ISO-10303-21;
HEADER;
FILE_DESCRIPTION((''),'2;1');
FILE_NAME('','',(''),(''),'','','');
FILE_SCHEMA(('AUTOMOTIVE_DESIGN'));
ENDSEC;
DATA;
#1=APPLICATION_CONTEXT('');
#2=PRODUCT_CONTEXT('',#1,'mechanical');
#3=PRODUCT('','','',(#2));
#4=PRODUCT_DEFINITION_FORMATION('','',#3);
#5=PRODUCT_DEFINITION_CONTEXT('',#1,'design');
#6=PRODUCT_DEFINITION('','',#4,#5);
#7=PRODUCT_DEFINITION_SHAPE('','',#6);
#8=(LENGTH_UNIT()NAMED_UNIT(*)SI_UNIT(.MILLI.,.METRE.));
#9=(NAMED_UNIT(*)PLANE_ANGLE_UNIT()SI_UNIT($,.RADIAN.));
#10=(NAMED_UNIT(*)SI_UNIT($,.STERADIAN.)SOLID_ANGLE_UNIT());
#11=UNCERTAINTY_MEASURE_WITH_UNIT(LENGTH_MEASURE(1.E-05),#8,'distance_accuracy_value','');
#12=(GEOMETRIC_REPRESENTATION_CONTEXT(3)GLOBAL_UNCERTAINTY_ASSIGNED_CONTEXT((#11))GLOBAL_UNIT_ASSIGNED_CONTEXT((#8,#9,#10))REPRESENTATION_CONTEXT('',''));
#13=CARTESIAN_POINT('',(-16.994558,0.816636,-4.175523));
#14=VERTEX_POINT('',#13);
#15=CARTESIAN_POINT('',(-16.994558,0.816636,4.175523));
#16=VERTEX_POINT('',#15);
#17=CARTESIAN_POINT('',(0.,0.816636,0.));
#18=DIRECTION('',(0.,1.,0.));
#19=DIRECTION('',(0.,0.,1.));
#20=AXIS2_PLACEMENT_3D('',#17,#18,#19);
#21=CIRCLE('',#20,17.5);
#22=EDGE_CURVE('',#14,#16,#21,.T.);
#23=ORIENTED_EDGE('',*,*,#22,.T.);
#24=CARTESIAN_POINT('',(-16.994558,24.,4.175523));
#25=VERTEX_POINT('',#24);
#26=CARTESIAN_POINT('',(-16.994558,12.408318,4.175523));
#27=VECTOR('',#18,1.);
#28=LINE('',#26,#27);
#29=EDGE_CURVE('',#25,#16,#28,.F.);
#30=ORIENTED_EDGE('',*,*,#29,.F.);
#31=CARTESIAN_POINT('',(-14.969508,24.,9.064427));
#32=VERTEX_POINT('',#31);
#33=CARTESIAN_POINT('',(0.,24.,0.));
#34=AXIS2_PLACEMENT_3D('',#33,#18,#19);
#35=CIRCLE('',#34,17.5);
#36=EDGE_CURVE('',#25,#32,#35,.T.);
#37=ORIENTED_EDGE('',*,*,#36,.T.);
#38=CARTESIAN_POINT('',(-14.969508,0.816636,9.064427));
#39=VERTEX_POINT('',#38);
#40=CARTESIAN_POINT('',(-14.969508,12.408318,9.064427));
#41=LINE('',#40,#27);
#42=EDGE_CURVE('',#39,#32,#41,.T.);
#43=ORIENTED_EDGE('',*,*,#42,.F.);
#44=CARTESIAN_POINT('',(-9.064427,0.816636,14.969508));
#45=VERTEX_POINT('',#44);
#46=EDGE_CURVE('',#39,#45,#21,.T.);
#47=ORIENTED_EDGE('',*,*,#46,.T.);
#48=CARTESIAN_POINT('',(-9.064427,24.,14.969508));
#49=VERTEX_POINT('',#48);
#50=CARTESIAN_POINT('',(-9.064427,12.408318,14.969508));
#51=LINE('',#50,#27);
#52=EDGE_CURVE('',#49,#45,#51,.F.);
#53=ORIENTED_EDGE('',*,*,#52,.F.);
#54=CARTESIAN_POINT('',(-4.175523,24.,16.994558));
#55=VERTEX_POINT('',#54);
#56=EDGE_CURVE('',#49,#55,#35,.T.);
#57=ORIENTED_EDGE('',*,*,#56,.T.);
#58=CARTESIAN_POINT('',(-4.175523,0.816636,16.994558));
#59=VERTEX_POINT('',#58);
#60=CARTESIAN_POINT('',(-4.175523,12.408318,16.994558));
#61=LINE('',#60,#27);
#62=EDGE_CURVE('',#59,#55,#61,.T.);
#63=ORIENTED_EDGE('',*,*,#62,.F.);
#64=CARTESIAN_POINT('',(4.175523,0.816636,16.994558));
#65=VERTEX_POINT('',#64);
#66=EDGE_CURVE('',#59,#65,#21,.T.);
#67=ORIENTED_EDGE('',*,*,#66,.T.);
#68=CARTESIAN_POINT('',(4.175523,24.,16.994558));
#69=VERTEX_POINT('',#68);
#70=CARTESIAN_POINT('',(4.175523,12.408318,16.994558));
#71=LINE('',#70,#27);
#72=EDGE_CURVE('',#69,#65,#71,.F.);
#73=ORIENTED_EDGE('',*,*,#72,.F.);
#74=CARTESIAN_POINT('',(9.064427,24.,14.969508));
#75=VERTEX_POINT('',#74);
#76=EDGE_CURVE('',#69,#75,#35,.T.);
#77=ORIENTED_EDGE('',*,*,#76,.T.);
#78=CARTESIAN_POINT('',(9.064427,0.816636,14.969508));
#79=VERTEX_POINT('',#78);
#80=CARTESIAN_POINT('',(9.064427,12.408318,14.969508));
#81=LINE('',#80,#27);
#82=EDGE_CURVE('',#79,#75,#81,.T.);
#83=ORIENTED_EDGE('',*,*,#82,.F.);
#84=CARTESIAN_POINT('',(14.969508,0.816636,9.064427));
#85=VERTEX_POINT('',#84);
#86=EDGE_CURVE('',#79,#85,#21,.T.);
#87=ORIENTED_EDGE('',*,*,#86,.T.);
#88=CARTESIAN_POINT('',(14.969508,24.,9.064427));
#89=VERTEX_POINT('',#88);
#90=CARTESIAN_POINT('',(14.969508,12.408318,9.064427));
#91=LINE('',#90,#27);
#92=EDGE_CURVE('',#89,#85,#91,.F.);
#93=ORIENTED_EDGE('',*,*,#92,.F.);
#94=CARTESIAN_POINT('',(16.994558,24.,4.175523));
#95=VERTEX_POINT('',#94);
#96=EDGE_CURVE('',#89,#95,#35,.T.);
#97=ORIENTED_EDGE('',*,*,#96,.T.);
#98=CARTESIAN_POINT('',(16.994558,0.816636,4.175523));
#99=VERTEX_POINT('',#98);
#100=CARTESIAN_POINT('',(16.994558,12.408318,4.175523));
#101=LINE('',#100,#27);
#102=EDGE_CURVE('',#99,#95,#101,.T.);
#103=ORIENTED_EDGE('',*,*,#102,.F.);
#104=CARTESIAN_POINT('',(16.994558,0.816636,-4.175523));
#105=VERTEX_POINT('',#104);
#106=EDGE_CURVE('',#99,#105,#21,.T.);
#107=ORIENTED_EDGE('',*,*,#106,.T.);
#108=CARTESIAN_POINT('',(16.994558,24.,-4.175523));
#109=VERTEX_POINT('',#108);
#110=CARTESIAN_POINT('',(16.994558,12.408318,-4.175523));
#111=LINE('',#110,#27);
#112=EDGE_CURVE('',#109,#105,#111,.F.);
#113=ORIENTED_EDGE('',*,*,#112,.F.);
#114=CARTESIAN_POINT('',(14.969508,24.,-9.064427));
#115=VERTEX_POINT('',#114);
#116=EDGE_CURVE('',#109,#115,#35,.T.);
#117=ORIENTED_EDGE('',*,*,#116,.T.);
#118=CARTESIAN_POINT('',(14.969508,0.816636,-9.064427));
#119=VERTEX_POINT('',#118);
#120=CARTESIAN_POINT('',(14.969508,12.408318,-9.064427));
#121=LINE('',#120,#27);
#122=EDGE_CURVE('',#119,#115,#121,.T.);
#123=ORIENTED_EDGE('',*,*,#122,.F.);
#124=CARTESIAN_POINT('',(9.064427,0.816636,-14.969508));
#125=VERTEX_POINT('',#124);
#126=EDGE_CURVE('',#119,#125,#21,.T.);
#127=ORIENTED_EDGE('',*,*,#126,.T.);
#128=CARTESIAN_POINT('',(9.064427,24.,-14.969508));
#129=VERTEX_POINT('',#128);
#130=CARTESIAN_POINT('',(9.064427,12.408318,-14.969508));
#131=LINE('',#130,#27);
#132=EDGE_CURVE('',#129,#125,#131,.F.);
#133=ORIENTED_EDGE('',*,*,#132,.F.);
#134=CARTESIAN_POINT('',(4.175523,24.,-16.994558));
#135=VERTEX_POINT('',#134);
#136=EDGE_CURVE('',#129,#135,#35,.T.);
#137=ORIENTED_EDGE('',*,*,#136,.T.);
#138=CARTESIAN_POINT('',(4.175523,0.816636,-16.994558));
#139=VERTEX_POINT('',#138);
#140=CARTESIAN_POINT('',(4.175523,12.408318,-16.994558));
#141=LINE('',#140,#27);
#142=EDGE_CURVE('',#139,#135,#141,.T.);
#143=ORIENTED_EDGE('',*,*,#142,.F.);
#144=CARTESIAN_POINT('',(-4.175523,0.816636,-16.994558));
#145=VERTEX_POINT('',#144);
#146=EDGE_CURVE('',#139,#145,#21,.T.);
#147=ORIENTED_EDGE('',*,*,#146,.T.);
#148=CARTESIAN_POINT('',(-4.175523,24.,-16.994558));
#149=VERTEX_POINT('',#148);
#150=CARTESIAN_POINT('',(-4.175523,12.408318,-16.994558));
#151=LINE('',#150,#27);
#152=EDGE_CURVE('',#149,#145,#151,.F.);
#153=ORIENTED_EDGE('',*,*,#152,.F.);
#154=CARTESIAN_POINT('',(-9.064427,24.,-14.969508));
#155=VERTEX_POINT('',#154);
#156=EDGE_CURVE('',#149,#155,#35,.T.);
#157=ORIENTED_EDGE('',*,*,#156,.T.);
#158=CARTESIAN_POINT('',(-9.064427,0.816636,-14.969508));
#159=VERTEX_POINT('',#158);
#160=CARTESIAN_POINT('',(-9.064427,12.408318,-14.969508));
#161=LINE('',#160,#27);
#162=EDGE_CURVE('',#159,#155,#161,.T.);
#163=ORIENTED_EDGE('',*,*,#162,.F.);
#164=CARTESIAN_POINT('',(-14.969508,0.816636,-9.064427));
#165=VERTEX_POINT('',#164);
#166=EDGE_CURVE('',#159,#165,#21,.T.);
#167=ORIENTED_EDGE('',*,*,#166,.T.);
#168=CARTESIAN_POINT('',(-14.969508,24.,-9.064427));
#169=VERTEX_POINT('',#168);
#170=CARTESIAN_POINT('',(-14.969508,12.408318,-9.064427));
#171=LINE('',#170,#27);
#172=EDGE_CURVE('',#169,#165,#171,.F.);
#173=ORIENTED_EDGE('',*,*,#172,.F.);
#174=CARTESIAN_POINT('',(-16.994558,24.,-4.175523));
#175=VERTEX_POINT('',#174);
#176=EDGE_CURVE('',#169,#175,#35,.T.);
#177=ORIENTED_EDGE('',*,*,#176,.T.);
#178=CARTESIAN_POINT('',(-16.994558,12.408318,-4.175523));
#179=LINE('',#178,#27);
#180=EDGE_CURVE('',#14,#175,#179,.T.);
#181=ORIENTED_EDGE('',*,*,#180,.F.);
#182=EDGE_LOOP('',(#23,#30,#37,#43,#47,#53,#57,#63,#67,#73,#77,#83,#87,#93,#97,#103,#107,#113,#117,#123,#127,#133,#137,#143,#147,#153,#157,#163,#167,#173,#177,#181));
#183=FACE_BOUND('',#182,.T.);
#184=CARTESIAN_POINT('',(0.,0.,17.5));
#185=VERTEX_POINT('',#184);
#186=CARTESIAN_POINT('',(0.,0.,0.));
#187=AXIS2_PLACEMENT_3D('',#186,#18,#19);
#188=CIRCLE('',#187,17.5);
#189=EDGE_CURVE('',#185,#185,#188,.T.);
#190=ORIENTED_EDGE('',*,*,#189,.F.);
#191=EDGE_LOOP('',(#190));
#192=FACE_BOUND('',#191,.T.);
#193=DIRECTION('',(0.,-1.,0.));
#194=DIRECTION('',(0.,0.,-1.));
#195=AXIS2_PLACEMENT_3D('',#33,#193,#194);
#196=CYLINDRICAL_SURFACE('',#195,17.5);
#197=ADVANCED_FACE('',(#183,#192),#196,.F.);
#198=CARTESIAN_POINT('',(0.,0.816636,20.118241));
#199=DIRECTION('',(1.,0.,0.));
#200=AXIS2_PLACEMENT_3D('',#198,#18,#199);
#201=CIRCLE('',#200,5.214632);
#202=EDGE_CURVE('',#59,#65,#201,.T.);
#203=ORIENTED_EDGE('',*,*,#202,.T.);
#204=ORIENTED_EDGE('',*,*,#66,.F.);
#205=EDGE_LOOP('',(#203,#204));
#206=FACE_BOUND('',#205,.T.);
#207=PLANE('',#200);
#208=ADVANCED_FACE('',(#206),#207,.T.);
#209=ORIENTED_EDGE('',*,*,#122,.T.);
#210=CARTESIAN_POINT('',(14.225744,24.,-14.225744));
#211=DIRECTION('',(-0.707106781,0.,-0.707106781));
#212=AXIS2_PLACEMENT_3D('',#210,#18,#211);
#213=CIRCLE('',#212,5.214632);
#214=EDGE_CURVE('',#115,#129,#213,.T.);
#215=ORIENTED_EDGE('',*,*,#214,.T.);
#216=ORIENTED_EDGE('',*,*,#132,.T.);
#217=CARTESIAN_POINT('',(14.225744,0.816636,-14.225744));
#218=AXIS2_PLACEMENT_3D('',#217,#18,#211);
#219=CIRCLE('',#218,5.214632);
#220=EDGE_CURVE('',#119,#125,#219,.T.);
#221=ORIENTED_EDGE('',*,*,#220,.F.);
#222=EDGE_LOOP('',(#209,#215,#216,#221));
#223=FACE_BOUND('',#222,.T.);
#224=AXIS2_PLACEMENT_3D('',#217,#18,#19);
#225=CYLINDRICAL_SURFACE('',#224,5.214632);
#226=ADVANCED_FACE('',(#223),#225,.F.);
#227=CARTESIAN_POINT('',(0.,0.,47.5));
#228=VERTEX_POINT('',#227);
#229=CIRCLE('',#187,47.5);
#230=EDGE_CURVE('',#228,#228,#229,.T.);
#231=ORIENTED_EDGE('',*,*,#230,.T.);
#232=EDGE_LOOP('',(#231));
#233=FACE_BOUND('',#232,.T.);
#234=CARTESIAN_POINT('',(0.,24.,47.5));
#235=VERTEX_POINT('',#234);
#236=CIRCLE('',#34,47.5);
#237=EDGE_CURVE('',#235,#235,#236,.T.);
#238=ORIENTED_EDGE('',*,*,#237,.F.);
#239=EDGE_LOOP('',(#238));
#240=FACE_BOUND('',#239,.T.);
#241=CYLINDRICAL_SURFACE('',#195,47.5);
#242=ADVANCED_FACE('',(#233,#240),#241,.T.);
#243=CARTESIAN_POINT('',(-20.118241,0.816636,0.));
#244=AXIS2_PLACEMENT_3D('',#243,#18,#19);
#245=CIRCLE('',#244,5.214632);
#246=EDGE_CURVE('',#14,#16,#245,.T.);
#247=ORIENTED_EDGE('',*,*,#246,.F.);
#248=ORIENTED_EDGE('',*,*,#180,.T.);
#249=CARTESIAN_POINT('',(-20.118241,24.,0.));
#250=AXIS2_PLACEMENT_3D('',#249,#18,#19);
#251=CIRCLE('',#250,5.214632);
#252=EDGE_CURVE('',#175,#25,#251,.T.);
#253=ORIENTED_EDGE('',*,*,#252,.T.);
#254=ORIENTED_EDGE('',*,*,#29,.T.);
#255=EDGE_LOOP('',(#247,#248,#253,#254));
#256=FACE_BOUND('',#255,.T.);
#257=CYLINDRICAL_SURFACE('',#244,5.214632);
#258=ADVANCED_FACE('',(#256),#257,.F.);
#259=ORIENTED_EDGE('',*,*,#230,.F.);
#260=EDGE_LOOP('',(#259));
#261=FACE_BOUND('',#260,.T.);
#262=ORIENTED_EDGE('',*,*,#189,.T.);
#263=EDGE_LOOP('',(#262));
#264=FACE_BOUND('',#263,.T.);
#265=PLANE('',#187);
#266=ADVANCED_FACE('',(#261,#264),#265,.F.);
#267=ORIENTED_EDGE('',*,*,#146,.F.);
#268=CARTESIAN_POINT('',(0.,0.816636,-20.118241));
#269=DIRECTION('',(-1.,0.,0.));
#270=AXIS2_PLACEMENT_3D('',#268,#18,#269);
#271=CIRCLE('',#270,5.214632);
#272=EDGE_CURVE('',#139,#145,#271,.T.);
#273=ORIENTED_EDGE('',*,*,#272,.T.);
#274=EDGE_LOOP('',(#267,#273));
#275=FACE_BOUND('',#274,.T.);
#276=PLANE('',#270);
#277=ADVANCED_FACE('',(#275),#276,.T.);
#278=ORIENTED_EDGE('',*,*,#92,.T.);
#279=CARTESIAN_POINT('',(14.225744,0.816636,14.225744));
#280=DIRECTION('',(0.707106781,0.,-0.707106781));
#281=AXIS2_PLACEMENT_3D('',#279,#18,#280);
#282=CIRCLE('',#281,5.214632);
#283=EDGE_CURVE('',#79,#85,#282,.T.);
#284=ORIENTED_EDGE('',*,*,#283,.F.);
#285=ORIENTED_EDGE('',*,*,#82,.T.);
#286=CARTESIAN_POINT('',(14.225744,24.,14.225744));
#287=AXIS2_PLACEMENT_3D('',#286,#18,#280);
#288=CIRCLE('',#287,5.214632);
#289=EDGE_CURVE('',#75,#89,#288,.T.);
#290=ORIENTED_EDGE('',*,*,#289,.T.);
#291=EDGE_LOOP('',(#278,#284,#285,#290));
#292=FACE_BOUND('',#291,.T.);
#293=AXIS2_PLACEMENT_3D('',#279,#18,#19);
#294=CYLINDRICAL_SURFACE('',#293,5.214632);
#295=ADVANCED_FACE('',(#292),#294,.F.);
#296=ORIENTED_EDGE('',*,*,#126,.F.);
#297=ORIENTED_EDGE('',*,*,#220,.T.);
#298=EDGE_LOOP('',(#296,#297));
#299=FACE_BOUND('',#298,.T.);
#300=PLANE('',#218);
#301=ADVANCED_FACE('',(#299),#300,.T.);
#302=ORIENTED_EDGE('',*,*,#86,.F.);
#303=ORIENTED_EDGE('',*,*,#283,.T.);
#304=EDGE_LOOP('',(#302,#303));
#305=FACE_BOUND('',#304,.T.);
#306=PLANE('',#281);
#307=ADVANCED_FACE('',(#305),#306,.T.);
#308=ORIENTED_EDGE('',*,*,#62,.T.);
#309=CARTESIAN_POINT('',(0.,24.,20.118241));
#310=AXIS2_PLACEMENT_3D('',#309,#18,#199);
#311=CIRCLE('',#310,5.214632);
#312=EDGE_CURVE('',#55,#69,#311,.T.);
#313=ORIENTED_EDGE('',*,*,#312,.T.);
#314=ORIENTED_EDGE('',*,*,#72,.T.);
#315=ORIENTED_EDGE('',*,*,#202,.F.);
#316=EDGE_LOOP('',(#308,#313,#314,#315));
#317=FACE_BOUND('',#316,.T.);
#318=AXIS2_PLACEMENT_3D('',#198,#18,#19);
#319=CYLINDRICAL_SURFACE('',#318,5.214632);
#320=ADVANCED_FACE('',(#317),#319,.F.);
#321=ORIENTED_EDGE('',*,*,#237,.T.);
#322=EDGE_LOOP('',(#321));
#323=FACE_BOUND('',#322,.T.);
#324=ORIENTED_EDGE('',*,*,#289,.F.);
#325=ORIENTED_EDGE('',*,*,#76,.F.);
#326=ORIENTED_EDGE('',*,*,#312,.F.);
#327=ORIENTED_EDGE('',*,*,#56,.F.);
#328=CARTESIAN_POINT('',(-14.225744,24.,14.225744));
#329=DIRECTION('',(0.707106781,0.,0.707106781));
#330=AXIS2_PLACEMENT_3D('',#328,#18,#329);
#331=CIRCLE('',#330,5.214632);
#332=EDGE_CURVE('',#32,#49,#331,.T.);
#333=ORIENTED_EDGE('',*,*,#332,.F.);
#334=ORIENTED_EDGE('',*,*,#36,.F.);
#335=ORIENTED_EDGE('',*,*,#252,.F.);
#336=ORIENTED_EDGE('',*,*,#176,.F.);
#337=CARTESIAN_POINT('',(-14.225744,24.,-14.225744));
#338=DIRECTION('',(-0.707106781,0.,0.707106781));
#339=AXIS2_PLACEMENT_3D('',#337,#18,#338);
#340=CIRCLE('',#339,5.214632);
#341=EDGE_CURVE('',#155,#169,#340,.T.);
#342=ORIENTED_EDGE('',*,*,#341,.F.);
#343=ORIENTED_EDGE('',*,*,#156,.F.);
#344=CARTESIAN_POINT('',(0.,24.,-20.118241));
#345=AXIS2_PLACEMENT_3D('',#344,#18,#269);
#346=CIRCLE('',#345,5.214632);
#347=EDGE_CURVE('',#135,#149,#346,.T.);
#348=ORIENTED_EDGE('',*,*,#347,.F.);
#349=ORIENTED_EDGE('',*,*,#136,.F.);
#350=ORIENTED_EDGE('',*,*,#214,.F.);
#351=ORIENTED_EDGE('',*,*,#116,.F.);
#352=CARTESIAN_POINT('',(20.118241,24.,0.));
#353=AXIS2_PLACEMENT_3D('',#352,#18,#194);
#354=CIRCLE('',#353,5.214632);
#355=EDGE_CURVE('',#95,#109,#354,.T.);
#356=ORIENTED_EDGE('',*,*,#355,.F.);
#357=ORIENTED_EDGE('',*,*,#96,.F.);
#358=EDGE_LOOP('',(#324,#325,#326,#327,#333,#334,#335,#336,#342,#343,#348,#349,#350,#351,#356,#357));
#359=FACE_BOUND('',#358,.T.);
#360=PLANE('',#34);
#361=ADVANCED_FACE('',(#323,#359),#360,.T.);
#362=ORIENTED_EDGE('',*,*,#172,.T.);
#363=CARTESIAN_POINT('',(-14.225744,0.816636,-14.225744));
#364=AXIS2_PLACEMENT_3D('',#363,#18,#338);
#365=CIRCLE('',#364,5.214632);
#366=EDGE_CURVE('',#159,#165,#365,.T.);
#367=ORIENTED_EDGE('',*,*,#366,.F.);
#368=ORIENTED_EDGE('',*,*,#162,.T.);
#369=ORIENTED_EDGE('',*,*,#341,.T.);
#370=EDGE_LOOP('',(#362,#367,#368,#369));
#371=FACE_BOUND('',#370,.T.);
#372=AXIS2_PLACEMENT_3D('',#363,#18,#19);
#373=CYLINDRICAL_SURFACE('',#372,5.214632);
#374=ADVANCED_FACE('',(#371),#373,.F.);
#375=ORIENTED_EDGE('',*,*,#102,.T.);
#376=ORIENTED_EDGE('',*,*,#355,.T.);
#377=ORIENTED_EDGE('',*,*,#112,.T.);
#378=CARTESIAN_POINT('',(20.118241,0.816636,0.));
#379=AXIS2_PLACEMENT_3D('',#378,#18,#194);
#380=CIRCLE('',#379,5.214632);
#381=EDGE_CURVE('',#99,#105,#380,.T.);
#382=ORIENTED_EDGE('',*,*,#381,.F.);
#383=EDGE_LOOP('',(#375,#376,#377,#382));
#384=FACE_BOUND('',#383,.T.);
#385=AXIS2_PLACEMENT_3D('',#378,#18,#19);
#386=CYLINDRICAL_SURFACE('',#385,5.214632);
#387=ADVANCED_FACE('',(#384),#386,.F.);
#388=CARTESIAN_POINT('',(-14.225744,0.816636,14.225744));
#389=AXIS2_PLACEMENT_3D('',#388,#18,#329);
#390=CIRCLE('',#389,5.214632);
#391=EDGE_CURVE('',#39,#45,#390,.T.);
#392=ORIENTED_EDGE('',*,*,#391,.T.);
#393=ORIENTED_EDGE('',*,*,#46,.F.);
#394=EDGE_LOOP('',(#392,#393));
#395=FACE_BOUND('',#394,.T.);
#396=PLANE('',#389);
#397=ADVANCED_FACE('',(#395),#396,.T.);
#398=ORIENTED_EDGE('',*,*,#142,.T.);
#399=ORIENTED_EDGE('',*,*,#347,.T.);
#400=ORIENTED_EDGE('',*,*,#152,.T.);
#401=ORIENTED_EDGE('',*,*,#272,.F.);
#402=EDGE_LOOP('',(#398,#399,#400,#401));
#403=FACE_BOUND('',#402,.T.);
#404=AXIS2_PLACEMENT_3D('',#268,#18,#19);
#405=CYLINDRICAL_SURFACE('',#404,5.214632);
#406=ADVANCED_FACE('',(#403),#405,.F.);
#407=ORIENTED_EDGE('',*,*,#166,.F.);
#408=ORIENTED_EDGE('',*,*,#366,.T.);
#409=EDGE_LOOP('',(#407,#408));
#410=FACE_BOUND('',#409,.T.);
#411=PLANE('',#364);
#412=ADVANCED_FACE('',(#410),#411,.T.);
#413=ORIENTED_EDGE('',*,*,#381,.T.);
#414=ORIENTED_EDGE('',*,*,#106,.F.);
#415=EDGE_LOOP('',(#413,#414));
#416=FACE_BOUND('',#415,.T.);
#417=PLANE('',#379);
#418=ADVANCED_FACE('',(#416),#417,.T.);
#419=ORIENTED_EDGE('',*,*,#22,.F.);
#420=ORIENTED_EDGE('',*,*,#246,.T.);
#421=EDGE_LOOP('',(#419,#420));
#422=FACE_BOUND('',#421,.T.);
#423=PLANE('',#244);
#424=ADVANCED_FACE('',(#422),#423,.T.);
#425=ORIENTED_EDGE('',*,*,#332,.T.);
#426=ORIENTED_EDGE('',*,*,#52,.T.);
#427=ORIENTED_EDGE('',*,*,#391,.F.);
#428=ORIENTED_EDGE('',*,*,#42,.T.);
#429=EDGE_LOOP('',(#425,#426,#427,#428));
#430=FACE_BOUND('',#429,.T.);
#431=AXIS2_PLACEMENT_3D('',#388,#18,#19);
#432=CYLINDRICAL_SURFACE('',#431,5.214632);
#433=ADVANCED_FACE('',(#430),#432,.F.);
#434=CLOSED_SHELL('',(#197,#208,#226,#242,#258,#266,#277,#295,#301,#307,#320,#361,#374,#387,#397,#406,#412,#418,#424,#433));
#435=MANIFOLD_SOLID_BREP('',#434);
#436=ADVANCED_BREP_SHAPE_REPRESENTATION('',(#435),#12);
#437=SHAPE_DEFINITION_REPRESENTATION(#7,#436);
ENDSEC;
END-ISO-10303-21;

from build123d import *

# Parameters (mm, degrees)
SKETCH1_R           = 47.5
BOSS_EXTRUDE1_DEPTH = 24
SKETCH2_R           = 17.5
CUT_EXTRUDE1_DEPTH  = 72.33372274
SKETCH3_R           = 5.21463171
CUT_EXTRUDE2_DEPTH  = 23.183363877
CIRPATTERN1_COUNT   = 8


with BuildPart() as part:
    # Sketch1 → Boss-Extrude1 (new body)
    with BuildSketch(Plane(origin=(0, 0, 0), x_dir=(1, 0, 0), z_dir=(0, 1, 0))):
        Circle(SKETCH1_R)
    extrude(amount=BOSS_EXTRUDE1_DEPTH)

    # Sketch2 → Cut-Extrude1 (cut, through all)
    with BuildSketch(Plane(origin=(0, 0, 0), x_dir=(1, 0, 0), z_dir=(0, 1, 0))):
        Circle(SKETCH2_R)
    extrude(amount=CUT_EXTRUDE1_DEPTH, mode=Mode.SUBTRACT)

    # Sketch3 → Cut-Extrude2 (cut)
    with BuildSketch(Plane(origin=(0, 24, 0), x_dir=(1, 0, 0), z_dir=(0, 1, 0))):
        with Locations((-20.118240623, 0)):
            Circle(SKETCH3_R)
    cut_extrude2 = extrude(amount=-CUT_EXTRUDE2_DEPTH, mode=Mode.SUBTRACT)

    # CirPattern1: Cut-Extrude2 ×8 about axis
    cirpattern1_axis = Axis((0, 0, 0), (0, 1, 0))
    for i in range(1, CIRPATTERN1_COUNT):
        add(cut_extrude2.rotate(cirpattern1_axis, i * 360 / CIRPATTERN1_COUNT), mode=Mode.SUBTRACT)


solid = part.part
